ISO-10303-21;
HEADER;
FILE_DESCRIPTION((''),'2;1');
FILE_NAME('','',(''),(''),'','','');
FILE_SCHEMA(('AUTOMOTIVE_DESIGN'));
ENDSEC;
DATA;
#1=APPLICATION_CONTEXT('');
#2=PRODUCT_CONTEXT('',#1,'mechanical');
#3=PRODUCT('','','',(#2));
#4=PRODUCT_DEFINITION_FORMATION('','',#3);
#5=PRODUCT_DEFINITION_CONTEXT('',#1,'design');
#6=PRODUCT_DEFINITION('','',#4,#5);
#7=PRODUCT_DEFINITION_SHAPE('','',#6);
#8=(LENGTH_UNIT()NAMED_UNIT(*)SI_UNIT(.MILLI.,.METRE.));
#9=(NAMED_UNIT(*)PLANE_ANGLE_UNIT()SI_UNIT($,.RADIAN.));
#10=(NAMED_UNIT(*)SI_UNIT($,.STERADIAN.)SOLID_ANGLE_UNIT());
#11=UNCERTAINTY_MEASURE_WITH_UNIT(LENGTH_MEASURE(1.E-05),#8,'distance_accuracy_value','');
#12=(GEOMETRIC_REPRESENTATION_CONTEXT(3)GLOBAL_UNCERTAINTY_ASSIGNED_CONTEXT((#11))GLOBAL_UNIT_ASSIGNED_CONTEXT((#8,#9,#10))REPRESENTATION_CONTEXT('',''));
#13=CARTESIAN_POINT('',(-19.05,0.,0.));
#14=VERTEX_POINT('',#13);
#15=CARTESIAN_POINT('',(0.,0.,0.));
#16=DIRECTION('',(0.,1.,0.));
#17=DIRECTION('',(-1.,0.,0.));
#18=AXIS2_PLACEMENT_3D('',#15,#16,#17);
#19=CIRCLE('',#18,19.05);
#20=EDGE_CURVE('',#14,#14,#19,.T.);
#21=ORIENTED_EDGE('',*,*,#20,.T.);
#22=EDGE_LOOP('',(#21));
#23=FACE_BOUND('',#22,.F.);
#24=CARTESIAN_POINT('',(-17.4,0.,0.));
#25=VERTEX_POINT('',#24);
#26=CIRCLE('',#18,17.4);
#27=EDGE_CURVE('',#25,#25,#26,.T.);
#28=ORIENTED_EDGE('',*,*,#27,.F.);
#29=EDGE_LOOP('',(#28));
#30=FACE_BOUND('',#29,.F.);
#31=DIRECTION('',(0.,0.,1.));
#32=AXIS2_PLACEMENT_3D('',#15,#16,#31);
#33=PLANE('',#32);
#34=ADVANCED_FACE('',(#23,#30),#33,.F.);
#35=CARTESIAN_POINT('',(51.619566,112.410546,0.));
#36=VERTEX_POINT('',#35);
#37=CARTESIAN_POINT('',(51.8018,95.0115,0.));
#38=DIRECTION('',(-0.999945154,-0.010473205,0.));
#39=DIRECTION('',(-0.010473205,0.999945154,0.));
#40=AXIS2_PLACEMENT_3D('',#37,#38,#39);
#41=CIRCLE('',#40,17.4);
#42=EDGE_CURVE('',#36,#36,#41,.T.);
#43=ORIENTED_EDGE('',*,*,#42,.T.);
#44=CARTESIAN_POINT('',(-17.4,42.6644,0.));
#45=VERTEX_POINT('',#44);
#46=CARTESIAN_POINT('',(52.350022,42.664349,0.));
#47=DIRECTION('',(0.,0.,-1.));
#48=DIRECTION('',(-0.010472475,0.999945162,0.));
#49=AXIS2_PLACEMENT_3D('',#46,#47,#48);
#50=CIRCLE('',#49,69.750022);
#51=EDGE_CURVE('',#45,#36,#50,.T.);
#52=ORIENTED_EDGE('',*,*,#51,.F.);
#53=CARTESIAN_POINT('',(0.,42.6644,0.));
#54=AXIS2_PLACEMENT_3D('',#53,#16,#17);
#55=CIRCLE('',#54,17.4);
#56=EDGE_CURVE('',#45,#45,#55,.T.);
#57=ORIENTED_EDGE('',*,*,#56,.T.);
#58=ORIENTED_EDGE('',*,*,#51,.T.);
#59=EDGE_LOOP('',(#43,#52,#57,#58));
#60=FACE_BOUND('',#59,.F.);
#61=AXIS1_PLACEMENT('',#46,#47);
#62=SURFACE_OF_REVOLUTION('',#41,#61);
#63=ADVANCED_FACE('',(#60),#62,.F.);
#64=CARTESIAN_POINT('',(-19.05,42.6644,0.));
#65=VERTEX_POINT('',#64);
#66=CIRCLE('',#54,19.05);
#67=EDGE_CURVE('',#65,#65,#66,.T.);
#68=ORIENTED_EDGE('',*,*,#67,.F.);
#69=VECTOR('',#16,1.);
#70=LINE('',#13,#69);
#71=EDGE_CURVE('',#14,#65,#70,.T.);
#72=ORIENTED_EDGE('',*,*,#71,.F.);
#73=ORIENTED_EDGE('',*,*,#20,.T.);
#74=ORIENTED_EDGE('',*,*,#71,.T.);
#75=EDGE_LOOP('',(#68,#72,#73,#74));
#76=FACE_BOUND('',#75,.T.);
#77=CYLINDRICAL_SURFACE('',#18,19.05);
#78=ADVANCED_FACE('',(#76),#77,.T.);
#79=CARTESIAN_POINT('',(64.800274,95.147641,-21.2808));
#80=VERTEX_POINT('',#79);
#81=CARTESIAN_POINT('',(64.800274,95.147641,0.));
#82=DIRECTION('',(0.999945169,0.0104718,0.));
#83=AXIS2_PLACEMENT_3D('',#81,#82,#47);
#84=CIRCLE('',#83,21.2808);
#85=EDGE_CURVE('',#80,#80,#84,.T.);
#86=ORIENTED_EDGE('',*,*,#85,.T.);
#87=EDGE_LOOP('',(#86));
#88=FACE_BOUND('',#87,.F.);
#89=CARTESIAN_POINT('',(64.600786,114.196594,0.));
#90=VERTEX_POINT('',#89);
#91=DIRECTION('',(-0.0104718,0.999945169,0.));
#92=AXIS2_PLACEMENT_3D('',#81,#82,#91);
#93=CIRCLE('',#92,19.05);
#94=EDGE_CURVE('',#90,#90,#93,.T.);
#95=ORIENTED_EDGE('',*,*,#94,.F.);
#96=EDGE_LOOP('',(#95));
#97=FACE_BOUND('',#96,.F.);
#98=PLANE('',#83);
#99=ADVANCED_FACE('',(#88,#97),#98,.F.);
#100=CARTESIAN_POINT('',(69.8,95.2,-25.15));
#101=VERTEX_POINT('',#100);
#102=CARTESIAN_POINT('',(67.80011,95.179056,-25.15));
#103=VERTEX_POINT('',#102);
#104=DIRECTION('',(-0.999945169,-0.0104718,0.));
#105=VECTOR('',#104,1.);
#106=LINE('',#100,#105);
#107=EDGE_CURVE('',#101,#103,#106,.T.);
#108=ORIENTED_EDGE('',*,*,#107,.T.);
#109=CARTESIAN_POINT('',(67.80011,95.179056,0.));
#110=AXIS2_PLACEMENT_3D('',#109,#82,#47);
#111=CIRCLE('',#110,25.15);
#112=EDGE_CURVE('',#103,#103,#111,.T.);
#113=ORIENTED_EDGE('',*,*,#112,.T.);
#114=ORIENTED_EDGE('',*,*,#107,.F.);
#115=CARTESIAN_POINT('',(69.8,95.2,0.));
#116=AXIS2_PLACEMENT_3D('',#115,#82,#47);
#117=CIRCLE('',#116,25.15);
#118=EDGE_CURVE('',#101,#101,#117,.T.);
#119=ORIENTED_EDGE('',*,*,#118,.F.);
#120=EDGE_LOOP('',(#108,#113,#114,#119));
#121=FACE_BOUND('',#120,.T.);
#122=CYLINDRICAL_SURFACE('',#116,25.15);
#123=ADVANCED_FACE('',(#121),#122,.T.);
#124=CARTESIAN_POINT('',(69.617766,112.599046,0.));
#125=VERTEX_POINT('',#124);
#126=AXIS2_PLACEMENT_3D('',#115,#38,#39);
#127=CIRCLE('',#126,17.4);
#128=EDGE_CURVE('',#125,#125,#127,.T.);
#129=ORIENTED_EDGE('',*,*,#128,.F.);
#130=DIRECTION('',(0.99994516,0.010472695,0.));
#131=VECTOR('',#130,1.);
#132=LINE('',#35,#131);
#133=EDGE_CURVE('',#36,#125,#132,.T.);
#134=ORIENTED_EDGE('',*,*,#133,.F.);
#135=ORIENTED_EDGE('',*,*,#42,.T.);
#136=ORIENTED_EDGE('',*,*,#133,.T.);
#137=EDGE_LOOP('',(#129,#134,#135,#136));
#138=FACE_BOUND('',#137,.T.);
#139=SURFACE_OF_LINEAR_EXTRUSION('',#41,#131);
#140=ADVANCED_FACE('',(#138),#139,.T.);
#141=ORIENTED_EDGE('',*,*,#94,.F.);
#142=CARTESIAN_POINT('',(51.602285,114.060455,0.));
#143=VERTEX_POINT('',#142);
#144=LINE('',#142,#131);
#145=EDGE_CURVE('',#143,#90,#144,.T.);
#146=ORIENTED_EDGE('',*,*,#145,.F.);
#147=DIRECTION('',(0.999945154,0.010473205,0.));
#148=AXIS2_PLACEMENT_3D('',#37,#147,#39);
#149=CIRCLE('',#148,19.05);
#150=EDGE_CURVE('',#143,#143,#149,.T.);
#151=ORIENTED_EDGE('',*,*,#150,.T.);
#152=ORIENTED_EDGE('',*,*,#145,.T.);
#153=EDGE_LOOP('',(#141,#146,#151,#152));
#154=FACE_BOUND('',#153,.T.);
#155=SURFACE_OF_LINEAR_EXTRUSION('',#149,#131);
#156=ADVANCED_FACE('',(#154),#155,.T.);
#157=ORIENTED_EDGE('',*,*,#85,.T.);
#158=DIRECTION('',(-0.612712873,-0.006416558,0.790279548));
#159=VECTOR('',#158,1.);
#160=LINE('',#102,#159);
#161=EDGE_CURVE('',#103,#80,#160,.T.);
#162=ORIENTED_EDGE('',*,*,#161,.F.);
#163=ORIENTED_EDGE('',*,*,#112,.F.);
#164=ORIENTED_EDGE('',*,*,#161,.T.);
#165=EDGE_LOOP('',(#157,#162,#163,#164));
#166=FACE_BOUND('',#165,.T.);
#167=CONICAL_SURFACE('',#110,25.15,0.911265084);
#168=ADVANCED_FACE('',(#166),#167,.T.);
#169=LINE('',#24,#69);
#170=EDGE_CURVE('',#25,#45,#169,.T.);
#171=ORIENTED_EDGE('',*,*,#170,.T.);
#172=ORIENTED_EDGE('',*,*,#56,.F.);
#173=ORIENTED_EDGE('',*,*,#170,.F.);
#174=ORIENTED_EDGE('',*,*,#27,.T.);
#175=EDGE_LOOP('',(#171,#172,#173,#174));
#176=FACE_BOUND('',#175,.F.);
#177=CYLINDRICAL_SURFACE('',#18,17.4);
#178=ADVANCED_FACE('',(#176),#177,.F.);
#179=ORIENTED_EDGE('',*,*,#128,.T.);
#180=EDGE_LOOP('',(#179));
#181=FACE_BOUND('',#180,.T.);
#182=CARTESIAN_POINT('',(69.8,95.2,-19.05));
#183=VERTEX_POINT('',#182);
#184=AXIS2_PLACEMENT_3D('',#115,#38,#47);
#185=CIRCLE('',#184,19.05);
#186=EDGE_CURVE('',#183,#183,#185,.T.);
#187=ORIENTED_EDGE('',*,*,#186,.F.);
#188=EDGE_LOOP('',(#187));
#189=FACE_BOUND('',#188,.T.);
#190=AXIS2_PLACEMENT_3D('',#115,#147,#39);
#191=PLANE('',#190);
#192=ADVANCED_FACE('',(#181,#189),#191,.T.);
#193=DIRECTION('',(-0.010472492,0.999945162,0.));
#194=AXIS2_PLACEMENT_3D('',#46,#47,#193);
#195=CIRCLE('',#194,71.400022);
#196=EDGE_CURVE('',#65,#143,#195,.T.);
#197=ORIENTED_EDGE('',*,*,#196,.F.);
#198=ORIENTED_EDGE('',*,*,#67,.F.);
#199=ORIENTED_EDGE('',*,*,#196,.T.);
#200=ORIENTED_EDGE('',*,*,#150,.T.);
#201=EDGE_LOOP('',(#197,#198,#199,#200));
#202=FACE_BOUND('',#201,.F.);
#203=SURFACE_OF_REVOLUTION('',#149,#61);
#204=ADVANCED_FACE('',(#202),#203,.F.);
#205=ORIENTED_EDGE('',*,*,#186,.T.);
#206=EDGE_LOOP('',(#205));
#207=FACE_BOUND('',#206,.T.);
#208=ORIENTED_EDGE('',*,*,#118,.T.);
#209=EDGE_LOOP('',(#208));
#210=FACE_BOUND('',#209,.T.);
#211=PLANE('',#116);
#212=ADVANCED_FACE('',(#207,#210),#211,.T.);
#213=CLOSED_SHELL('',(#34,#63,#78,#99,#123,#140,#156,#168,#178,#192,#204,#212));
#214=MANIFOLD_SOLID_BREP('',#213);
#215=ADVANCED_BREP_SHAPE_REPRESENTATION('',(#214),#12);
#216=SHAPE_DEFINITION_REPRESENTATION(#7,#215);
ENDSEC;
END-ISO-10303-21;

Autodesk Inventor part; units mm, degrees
ref_plane "YZ Plane" through (0, 0, 0) normal (1, 0, 0) x (0, 1, 0)
ref_plane "XZ Plane" through (0, 0, 0) normal (0, 1, 0) x (-1, 0, 0)
ref_plane "XY Plane" through (0, 0, 0) normal (0, 0, 1) x (1, 0, 0)
sketch "Sketch1" plane through (0, 0, 0) normal (0, 0, 1) x (1, 0, 0)
  line L0 (0, 0) -> (0, 42.6644)
  line L1 (51.8018, 95.0115) -> (69.8, 95.2)
  arc A0 (51.8018, 95.0115) -> (0, 42.6644) centre (52.35, 42.6644) ccw
  dimension "d1" = 95.2
  dimension "d2" = 69.8
  dimension "d4" = 52.35
  dimension "d17" = 90.6
sketch "Sketch2" plane through (0, 0, 0) normal (0, 1, 0) x (-1, 0, 0)
  circle A0 centre (0, 0) radius 19.05
  circle A1 centre (0, 0) radius 17.4
  dimension "d3" = 38.1
  dimension "d11" = 1.65
sweep "Sweep1" add profiles "Sketch2" path "Sketch1"
sketch "Sketch3" plane through (69.8, 95.2, 0) normal (0.9999452, 0.0104718, 0) x (0, 0, -1)
  circle A0 centre (0, 0) radius 19.05 projected
  circle A1 centre (0, 0) radius 25.15
  point P0 (0, -94.4638)
  dimension "d6" = 50.3
extrude "Extrusion1" add sketch "Sketch3" against normal blind 5
chamfer "Chamfer1" distance 3 distance2 3.8692 1 edges at (64.8003, 95.1476, 25.15) measured on face at (66.5091, 91.131, -24.8243)
equation "\"d4\" = 0.75 * d2"
equation "\"d15\" = 0.0769231 * d6"
properties part number "asme bpe - ferrule 90.6 deg elb-38.1"
